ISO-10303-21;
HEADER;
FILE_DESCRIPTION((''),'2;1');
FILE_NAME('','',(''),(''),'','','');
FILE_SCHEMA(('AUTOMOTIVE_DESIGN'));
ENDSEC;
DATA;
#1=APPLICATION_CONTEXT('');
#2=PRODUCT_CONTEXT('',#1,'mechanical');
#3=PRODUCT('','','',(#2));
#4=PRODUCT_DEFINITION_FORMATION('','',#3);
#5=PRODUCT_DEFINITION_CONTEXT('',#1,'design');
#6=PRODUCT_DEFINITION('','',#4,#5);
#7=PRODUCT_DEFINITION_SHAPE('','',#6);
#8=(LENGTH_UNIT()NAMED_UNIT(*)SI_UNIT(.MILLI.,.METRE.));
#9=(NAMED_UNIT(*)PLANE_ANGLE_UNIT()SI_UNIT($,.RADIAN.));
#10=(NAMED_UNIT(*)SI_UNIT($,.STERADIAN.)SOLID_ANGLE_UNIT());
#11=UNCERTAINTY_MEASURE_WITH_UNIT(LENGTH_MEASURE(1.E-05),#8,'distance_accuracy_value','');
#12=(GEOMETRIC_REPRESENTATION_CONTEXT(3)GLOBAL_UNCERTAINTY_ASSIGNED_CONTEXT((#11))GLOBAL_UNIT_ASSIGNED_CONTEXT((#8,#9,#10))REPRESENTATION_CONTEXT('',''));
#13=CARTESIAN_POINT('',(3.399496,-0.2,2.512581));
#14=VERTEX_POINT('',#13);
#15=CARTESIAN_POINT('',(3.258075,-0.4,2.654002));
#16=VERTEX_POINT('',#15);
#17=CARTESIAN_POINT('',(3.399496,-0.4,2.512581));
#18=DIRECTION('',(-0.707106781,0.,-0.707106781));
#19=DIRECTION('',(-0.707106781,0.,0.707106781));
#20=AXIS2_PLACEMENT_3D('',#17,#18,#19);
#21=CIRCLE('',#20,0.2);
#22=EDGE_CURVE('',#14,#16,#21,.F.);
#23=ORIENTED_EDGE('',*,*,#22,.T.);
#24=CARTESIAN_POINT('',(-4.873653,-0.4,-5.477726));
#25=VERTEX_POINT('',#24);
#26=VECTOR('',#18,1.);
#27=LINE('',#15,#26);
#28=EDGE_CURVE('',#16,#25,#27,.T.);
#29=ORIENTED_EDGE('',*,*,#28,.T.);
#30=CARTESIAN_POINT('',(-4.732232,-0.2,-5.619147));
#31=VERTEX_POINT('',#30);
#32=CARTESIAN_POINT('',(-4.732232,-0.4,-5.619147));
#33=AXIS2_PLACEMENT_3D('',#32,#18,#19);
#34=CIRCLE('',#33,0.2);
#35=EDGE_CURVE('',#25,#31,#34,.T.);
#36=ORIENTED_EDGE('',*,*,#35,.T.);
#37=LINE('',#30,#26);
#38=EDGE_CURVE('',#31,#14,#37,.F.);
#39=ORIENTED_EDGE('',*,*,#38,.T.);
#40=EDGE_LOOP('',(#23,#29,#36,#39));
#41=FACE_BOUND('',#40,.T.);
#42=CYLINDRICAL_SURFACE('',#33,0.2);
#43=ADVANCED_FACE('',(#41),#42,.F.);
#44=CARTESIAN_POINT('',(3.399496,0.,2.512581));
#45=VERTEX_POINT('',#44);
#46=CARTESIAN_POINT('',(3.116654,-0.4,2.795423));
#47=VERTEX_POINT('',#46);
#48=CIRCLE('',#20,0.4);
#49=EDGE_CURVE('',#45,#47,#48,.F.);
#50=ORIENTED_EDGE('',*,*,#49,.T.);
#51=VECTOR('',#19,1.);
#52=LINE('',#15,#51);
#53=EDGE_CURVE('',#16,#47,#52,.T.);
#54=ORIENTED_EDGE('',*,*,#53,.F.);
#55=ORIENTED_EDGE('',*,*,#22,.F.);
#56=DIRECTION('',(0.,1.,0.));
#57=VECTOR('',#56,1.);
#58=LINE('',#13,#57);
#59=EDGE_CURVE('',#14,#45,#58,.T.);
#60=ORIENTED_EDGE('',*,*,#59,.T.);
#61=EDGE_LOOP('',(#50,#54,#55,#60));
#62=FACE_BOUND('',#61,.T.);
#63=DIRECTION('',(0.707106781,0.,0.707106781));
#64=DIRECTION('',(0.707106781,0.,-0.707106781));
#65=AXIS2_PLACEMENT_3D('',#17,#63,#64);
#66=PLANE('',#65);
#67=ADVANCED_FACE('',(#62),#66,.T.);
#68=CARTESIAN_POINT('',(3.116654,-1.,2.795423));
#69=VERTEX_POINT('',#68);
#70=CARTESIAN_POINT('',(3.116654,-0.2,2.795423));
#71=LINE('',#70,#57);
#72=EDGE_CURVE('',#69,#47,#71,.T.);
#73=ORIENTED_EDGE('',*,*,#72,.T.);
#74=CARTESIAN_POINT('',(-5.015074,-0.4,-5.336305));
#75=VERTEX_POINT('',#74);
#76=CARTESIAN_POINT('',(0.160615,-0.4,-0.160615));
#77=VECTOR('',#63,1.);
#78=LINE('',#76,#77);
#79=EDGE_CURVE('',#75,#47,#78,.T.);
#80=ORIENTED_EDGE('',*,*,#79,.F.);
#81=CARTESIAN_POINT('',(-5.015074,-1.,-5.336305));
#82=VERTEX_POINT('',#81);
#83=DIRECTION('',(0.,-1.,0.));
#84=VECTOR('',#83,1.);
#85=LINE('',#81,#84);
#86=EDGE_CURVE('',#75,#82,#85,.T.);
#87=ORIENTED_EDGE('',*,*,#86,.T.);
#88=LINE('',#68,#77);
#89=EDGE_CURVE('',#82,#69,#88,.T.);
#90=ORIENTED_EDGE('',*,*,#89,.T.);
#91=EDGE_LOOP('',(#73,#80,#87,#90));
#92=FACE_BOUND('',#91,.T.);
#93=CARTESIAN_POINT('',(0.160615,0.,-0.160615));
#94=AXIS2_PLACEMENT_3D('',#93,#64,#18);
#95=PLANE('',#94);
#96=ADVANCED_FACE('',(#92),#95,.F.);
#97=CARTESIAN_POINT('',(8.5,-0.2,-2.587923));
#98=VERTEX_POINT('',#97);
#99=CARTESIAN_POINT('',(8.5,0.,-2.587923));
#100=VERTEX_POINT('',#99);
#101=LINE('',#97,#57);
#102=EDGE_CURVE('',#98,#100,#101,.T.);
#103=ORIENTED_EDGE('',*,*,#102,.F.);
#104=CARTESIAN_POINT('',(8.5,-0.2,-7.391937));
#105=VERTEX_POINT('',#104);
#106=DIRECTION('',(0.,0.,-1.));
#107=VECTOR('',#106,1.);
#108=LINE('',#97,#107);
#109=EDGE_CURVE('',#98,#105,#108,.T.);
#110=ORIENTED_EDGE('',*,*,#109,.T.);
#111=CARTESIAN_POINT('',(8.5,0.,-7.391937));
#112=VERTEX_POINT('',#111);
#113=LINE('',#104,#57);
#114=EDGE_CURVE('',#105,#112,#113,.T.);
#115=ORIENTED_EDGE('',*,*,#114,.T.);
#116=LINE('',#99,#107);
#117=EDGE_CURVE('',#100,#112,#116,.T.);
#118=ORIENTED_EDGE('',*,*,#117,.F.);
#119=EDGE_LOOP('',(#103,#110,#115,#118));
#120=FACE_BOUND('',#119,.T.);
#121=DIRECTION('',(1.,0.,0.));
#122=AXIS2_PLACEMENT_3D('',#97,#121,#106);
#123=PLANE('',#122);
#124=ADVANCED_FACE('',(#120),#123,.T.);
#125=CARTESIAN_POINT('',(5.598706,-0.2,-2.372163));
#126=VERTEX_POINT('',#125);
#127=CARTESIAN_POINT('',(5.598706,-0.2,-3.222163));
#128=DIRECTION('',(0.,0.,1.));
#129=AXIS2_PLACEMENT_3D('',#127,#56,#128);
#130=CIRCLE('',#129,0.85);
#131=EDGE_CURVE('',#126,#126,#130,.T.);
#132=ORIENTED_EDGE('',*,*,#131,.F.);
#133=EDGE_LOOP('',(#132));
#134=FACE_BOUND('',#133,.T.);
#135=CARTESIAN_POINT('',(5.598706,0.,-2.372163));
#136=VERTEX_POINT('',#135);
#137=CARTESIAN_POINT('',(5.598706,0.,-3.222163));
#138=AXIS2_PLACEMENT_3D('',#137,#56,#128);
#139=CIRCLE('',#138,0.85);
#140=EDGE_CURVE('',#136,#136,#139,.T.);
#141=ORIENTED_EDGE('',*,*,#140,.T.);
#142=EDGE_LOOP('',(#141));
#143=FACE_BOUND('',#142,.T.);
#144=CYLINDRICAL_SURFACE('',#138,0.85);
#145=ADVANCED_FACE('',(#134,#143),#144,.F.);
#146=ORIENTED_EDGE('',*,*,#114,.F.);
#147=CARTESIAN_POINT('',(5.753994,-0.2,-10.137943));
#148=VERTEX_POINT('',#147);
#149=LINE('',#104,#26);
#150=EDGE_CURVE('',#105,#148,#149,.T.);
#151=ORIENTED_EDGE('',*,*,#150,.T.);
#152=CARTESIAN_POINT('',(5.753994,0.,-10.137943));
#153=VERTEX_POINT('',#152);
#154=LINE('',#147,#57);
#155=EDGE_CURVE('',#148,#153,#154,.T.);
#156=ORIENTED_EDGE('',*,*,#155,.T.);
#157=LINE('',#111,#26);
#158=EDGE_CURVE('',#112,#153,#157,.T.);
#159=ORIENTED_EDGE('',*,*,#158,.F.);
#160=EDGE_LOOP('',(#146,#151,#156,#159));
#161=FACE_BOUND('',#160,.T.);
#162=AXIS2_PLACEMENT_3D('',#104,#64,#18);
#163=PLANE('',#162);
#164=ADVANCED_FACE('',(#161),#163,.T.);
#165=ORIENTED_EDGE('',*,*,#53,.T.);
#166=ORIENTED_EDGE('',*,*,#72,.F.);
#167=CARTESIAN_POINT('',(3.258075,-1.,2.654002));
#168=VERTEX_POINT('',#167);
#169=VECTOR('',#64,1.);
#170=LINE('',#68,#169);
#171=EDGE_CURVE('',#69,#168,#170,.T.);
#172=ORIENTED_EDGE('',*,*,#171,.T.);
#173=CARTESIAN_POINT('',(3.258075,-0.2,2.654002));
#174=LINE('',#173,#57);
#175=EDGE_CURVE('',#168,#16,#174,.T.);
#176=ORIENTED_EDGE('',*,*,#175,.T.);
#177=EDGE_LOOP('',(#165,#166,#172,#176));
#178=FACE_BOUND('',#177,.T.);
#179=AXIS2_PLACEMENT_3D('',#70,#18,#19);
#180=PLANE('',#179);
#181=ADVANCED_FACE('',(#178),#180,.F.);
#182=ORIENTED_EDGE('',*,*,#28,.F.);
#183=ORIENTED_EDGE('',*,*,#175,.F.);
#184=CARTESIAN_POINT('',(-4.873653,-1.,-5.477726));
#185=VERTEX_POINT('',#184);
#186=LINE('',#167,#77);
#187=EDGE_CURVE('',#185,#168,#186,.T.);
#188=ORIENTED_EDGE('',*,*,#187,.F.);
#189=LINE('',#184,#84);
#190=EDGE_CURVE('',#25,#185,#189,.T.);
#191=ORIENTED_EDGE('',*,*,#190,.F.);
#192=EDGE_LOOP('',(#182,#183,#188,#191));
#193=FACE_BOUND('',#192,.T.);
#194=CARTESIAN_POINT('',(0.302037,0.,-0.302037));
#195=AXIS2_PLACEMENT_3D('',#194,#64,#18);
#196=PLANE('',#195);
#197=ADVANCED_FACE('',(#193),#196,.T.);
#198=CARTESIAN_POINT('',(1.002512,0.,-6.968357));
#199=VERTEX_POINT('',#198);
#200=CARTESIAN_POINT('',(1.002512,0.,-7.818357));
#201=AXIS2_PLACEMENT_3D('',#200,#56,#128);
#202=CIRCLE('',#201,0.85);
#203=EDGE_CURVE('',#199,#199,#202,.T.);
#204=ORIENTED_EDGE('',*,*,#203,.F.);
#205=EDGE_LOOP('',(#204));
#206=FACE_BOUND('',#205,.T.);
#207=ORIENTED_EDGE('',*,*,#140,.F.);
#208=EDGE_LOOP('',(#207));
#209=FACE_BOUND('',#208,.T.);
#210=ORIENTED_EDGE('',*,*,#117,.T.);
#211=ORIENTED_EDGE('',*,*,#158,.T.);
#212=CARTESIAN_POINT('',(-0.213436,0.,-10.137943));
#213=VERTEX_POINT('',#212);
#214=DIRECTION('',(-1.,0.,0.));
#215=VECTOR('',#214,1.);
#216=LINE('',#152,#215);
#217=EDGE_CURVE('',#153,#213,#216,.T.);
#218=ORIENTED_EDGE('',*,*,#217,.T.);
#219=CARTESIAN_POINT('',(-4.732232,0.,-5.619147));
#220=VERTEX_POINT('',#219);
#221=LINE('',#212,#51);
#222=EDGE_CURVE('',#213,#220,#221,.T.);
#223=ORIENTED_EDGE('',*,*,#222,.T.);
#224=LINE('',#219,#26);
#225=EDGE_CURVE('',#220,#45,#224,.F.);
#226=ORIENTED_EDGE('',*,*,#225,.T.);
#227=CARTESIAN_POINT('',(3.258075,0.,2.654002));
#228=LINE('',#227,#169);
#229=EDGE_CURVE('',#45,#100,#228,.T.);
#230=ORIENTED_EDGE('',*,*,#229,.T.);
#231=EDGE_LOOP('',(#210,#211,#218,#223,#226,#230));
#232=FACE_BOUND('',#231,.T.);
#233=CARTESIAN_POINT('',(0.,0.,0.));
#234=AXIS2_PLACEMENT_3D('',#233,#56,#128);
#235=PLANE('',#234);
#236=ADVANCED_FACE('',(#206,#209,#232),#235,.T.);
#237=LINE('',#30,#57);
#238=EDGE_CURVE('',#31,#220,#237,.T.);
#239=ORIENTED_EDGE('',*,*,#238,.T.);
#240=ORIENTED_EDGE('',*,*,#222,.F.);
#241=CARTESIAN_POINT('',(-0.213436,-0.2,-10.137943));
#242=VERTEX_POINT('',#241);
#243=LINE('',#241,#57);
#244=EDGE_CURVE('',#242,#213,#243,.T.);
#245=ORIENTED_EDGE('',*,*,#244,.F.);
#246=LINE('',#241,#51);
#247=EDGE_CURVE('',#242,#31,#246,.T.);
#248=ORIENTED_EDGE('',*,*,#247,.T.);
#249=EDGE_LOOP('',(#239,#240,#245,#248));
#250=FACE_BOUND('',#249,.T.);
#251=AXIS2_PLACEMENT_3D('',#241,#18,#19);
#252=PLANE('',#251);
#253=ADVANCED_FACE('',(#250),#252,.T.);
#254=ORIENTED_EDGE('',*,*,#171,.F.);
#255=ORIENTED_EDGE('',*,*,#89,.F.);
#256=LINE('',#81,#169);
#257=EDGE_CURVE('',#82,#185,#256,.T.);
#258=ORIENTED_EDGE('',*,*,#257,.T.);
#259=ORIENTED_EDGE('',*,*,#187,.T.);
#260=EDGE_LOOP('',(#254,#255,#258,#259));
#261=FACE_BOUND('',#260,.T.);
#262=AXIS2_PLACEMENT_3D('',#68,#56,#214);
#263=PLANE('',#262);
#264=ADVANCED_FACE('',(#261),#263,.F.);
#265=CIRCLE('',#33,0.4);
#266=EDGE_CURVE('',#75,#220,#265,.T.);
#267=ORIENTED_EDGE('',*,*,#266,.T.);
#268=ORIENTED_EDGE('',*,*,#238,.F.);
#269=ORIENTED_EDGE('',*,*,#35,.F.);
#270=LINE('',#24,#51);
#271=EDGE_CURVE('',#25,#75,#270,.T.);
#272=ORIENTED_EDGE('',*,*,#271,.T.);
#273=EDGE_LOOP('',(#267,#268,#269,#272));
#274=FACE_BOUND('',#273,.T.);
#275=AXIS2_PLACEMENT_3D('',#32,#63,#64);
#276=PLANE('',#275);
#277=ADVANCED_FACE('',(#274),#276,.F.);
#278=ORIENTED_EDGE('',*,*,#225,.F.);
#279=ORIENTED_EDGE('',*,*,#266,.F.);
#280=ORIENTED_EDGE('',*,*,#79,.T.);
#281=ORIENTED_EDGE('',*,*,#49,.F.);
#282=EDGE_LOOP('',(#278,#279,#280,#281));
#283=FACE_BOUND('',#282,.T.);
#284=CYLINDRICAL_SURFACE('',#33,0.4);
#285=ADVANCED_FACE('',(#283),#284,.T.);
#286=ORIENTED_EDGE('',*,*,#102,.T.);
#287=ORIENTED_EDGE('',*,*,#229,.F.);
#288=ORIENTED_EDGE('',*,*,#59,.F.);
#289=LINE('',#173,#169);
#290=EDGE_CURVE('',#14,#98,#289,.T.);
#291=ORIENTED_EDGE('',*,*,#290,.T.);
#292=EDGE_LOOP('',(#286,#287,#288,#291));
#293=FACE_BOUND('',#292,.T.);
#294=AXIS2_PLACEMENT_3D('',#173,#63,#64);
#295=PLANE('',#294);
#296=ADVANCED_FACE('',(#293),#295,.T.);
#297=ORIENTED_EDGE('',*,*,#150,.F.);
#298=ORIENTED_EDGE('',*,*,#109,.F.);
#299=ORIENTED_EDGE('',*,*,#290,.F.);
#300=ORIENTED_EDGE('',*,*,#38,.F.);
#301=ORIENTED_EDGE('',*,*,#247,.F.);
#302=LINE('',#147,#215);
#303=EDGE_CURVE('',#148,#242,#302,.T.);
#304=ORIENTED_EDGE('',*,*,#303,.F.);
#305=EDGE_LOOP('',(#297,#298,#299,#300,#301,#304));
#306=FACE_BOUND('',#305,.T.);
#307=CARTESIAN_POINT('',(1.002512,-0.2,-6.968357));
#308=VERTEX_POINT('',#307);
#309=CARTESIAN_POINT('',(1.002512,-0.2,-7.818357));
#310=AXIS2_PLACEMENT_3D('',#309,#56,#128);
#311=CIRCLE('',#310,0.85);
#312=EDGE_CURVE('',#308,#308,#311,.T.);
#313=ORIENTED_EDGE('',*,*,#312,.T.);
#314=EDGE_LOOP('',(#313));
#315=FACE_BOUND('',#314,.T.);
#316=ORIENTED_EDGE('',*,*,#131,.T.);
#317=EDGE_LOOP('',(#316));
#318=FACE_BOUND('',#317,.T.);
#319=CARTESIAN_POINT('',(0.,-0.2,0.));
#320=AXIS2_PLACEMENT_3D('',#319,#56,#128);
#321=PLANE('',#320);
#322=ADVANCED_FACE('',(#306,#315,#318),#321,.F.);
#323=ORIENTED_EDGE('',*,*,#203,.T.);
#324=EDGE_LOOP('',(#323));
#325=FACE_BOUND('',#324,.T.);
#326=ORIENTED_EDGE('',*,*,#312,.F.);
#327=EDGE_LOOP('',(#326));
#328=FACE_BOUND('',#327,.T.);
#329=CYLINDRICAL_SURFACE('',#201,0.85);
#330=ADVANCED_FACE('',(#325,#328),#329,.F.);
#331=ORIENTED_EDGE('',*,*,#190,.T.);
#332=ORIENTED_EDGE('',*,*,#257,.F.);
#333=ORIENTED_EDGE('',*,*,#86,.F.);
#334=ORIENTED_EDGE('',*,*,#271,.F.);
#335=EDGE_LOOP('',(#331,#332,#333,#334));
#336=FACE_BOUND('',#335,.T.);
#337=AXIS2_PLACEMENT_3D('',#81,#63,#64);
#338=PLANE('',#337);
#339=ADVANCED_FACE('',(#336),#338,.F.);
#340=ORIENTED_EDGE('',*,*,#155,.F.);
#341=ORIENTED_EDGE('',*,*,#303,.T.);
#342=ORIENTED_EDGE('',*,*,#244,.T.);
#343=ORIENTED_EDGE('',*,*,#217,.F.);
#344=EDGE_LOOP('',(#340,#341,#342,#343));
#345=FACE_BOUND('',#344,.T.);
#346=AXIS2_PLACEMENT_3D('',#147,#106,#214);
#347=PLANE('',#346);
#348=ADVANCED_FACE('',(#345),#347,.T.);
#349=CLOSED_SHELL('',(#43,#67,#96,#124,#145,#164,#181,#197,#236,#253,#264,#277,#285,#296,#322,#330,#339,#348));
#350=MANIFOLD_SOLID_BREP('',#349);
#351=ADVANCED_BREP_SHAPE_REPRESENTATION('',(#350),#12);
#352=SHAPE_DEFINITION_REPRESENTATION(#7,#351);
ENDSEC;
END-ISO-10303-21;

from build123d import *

# Parameters (mm, degrees)
BASE_FLANGE1_DEPTH           = 0.2
EDGE_FLANGE1_STRIP_W         = 1.2
EDGE_FLANGE1_STRIP_H         = 0.2
EDGE_FLANGE1_STRIP_CUT_DEPTH = 11.5
EDGE_FLANGE1_DEPTH           = 11.5
F_1_7_1_7_DIAMETER_HOLE1_D   = 1.7


# Sheet-metal steps are written as plain solids
with BuildPart() as part:
    # Sketch1 → Base-Flange1 (new body)
    with BuildSketch(Plane(origin=(0, 0, 0), x_dir=(1, 0, 0), z_dir=(0, 1, 0))):
        Polygon((5.75399352, 10.137943159), (-0.213435895, 10.137943159), (-4.873652989, 5.477726065), (3.258074995, -2.654001919), (8.5, 2.587923086), (8.5, 7.391936679), align=None)
    extrude(amount=-BASE_FLANGE1_DEPTH)

    # Edge-Flange1 strip (across the edge) → Edge-Flange1 strip cut (cut)
    with BuildSketch(Plane(origin=(3.258074995, -0.2, 2.654001919), x_dir=(0.707106781186555, -3.4914813388431337e-15, -0.70710678118654), z_dir=(-0.70710678118654, 0, -0.707106781186555))):
        with Locations((-0.4, -0.1)):
            Rectangle(EDGE_FLANGE1_STRIP_W, EDGE_FLANGE1_STRIP_H)
    extrude(amount=EDGE_FLANGE1_STRIP_CUT_DEPTH, mode=Mode.SUBTRACT)

    # Edge-Flange1 section (across the edge) → Edge-Flange1 (add)
    with BuildSketch(Plane(origin=(3.258074995, -0.2, 2.654001919), x_dir=(0.707106781186555, -3.4914813388431337e-15, -0.70710678118654), z_dir=(-0.70710678118654, 0, -0.707106781186555))):
        with BuildLine():
            Line((-0.2, 0.2), (-0.2, 0.8))
            Line((-0.2, 0.8), (0, 0.8))
            Line((0, 0.8), (0, 0.2))
            ThreePointArc((0, 0.2), (0.058578644, 0.058578644), (0.2, 0))
            Line((0.2, 0), (0.2, -0.2))
            ThreePointArc((0.2, -0.2), (-0.082842712, -0.082842712), (-0.2, 0.2))
        make_face()
    extrude(amount=EDGE_FLANGE1_DEPTH)

    # Ø1.7 (1.7) Diameter Hole1 (through all)
    with Locations(Plane(origin=(0, 0, 0), x_dir=(1, 0, 0), z_dir=(0, 1, 0))):
        with Locations((1.00251186, 7.818357007), (5.598705937, 3.22216293)):
            Hole(F_1_7_1_7_DIAMETER_HOLE1_D / 2)


solid = part.part
